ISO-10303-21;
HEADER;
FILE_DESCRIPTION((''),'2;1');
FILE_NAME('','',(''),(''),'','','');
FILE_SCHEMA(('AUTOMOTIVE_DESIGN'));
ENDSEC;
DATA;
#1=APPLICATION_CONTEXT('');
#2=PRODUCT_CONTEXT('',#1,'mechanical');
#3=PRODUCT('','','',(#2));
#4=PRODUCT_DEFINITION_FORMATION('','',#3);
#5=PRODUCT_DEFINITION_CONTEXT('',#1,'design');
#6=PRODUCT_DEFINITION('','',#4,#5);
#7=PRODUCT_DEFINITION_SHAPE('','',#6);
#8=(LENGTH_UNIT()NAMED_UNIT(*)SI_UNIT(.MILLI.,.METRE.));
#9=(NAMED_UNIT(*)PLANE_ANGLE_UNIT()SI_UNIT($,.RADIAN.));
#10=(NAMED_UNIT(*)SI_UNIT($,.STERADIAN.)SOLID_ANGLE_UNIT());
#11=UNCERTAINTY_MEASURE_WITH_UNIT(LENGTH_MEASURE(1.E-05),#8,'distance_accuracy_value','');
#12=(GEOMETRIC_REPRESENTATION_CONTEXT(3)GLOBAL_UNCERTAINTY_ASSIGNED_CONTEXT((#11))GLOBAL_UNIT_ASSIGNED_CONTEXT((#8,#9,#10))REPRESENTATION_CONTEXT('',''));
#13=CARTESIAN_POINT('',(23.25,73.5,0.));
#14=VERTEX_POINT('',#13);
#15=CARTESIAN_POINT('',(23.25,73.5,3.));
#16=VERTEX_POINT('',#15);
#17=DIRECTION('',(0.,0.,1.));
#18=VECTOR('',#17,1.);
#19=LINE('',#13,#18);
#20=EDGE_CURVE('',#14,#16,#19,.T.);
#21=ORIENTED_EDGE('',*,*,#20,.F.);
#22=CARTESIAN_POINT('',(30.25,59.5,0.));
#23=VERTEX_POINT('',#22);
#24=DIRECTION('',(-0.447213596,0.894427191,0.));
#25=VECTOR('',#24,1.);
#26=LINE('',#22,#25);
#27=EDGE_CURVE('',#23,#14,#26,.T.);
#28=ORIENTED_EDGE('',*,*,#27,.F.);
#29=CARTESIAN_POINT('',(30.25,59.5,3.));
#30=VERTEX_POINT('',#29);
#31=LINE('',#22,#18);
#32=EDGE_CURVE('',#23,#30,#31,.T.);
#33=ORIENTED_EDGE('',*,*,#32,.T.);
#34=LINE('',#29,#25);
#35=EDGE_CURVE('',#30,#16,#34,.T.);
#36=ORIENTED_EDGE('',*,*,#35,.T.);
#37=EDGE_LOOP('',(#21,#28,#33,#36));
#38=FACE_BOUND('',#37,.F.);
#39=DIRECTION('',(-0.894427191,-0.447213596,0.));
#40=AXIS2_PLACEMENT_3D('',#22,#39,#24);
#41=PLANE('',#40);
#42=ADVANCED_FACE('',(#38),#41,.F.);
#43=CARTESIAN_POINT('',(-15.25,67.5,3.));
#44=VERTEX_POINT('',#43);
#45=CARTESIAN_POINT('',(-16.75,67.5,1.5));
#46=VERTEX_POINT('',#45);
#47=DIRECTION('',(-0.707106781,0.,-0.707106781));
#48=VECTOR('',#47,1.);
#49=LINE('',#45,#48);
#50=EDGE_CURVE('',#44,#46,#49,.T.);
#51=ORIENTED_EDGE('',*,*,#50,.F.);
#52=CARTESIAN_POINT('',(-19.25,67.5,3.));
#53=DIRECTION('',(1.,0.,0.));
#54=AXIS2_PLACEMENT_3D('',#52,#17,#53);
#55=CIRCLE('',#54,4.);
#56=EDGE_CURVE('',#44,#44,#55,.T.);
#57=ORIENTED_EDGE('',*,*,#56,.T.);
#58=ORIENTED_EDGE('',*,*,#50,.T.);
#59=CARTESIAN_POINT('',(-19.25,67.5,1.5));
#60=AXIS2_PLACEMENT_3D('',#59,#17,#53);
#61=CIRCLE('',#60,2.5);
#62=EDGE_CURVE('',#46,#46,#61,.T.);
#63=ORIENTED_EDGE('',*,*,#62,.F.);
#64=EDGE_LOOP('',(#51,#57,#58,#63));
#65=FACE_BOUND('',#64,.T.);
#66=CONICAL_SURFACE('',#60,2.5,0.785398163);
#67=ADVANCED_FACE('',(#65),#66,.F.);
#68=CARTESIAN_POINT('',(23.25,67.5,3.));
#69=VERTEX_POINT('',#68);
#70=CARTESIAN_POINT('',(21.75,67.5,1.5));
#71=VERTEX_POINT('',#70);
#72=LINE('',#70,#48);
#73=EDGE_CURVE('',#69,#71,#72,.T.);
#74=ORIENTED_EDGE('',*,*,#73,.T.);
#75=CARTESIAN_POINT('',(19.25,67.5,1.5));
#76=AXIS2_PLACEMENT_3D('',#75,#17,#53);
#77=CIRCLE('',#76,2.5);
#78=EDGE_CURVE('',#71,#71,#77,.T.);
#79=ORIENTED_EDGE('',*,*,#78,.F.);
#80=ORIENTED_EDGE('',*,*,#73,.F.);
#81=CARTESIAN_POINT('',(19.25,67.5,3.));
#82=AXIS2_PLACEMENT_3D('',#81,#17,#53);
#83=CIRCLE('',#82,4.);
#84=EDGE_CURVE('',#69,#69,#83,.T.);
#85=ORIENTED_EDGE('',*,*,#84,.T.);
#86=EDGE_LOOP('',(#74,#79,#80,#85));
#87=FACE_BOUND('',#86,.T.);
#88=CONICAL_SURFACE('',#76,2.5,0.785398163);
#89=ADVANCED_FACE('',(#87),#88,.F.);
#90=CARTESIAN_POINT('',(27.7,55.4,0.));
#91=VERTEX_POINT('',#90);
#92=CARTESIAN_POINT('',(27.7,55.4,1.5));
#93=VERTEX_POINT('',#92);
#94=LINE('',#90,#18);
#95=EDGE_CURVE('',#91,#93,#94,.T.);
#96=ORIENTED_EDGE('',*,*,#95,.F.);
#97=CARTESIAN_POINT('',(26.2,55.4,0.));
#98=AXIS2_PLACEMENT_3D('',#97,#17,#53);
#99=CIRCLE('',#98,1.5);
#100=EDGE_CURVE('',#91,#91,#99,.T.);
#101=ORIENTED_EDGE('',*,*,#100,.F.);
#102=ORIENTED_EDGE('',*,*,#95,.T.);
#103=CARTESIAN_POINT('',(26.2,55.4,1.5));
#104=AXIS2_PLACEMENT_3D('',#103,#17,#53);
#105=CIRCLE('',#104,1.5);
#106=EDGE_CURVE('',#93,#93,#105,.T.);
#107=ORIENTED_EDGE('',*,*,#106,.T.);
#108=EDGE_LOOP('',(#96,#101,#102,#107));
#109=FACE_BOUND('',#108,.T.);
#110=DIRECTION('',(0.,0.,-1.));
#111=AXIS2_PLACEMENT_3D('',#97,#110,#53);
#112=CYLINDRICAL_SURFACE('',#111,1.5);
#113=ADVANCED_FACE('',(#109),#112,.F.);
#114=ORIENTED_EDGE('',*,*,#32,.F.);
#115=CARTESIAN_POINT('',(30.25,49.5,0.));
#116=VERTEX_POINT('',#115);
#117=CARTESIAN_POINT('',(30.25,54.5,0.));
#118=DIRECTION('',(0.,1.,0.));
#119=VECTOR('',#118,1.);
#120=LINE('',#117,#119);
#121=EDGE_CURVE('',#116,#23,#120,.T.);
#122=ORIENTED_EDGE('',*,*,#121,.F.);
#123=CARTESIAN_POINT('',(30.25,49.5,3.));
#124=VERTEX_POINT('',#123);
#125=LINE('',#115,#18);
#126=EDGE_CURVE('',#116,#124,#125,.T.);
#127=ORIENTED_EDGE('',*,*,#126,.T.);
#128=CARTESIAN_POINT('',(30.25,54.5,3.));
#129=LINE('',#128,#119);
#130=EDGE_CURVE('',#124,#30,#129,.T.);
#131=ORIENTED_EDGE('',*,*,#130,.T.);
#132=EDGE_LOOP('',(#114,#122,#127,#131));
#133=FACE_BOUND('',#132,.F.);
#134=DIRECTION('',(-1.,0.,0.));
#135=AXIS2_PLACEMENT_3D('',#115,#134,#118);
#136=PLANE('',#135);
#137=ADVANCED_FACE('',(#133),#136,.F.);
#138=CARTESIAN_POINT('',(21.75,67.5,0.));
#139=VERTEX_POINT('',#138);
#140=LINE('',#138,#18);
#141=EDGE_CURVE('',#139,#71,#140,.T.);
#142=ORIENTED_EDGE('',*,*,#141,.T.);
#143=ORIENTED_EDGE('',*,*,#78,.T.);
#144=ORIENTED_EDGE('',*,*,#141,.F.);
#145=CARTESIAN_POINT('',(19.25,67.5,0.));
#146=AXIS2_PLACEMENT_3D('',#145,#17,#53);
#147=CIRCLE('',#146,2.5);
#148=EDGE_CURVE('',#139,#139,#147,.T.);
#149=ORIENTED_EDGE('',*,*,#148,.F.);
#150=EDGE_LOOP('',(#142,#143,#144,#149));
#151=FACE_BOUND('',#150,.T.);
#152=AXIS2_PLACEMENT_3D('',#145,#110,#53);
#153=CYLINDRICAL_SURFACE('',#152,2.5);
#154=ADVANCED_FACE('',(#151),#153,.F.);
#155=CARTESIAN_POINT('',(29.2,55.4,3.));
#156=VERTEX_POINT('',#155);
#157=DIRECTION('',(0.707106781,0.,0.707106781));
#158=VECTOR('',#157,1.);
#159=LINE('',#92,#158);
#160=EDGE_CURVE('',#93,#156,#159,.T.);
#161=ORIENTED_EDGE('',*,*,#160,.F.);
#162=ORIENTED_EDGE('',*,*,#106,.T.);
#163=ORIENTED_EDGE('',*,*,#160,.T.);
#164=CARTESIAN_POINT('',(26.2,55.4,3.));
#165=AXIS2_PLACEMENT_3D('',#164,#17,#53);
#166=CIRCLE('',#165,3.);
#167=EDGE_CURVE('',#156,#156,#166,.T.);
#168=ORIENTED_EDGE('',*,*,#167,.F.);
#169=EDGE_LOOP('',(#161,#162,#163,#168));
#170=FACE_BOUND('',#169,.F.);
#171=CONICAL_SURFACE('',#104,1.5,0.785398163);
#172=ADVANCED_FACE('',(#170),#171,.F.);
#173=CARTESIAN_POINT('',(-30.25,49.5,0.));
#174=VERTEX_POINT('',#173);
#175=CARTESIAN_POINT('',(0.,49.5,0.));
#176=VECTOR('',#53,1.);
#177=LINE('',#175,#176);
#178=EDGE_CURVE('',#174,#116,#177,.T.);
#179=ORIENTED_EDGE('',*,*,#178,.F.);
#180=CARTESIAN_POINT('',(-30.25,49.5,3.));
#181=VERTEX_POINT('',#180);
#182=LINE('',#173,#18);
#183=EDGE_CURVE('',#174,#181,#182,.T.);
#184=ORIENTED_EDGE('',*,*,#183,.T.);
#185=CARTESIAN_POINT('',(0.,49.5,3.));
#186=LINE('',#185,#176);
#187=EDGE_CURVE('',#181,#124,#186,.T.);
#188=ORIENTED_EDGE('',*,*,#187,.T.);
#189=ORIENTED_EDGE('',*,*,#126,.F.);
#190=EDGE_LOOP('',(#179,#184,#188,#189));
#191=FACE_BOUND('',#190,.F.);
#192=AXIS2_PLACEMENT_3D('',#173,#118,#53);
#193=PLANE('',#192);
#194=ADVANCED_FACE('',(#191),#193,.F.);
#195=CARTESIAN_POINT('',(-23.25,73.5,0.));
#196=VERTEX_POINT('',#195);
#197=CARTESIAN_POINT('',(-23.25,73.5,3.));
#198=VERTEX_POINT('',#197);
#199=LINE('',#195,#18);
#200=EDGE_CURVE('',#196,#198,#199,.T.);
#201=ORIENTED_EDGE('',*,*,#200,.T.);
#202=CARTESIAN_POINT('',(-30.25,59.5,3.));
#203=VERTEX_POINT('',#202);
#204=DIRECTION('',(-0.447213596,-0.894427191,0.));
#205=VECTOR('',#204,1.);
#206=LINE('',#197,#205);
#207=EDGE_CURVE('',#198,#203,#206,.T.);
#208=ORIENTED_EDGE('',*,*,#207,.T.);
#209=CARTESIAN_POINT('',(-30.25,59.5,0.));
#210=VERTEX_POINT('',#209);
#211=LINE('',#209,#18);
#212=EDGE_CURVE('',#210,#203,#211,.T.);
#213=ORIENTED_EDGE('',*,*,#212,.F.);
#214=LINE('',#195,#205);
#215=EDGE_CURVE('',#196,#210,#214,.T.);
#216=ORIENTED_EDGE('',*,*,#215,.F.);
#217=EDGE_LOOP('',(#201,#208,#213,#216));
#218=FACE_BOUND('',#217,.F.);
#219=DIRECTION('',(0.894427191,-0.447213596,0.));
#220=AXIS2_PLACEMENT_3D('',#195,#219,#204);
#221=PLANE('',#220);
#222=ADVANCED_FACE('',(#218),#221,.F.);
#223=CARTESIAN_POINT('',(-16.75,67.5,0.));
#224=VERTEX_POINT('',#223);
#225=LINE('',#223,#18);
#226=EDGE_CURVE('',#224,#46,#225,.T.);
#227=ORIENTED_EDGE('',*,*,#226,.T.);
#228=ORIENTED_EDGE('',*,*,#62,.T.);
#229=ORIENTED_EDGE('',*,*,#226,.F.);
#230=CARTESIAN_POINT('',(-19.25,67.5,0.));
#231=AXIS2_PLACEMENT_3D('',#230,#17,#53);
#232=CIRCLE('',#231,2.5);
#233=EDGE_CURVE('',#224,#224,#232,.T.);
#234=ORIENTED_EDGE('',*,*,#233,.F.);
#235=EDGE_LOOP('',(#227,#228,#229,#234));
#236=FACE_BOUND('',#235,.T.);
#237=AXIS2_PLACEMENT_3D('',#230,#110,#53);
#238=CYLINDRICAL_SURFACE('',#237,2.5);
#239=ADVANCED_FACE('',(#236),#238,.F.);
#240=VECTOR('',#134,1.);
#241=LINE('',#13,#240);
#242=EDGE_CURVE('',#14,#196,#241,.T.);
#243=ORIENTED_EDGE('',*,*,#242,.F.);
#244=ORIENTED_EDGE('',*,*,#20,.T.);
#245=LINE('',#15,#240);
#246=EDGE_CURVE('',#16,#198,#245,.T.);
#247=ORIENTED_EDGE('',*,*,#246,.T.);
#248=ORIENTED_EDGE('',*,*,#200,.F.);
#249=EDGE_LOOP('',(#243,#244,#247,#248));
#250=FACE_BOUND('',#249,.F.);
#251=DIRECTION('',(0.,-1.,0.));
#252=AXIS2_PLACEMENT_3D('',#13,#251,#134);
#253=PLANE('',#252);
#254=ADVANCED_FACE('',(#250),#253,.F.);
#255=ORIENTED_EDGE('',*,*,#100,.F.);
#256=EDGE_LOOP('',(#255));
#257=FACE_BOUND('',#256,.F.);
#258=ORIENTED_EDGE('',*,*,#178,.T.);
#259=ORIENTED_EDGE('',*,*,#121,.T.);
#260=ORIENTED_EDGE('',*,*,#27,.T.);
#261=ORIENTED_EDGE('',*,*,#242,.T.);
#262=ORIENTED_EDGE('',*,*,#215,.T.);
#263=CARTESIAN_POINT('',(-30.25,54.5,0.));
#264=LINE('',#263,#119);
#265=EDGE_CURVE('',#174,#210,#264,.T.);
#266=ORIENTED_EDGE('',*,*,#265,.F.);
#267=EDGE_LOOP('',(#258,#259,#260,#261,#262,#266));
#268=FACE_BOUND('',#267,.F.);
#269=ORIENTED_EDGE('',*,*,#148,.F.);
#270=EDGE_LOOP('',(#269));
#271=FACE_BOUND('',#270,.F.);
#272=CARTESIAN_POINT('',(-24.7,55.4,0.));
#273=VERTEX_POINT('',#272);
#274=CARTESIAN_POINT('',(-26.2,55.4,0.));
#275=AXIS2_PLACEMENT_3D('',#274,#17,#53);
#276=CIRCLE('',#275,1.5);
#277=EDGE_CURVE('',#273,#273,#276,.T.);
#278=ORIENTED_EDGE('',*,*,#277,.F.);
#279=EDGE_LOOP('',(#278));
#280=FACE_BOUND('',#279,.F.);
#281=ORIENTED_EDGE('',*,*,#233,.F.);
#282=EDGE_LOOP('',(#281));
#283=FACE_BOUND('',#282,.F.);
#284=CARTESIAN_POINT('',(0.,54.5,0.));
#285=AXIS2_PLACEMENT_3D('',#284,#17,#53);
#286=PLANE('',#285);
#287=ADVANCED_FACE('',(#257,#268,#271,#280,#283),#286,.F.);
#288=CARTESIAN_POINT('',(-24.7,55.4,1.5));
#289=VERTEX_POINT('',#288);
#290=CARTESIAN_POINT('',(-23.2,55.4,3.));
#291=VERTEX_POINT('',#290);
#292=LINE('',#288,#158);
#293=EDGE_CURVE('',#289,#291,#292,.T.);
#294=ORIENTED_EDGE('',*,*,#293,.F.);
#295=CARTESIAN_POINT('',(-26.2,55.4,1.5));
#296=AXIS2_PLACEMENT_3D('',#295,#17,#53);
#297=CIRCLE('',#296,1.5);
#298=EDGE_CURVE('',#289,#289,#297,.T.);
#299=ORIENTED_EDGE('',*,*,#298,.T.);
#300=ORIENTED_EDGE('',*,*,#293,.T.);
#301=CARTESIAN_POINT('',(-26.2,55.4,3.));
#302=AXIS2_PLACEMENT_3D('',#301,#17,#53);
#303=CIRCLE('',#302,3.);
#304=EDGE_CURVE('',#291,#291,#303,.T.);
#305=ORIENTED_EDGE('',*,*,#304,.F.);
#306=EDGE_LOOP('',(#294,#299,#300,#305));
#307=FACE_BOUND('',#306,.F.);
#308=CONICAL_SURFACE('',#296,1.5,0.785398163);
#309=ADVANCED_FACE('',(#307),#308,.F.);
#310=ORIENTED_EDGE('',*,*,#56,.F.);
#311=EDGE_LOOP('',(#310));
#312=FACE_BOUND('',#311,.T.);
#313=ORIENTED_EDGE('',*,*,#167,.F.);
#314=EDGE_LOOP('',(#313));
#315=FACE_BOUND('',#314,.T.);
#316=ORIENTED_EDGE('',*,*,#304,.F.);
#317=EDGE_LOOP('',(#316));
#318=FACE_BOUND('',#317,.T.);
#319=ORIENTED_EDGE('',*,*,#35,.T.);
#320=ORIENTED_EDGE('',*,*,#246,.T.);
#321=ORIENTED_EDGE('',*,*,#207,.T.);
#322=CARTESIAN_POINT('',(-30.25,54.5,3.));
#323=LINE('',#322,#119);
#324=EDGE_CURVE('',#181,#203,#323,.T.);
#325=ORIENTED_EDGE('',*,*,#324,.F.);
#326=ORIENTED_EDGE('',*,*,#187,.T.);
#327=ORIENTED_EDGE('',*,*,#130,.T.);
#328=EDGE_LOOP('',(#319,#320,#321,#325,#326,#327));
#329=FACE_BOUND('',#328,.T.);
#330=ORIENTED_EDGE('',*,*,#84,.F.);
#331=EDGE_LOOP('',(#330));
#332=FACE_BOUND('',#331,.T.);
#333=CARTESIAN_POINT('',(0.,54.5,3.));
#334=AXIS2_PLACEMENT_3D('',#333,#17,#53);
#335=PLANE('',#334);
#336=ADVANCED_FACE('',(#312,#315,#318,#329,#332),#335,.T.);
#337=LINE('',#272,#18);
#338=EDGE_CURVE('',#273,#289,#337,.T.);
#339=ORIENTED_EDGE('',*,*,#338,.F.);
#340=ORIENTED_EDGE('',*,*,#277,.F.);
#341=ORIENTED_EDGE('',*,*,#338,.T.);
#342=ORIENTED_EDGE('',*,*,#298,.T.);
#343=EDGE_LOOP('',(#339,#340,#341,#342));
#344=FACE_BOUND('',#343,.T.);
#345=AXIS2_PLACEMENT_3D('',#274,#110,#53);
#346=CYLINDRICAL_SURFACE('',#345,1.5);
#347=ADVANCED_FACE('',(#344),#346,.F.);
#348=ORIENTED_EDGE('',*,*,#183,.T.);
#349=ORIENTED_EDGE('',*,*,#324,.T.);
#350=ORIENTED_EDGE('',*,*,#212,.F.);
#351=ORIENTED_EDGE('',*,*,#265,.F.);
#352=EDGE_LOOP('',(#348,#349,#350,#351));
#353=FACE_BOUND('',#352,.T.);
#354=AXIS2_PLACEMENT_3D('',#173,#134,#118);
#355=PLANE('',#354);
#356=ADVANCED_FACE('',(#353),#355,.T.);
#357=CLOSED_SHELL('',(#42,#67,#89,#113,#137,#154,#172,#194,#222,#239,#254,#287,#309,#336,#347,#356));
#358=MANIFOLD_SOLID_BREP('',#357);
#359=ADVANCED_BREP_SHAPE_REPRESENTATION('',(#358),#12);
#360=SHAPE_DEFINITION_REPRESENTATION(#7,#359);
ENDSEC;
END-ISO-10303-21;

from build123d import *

# Parameters (mm, degrees)
F0_W     = 60.5
F0_H     = 10
F0_R     = 1.5
F0_R_2   = 2.5
F1_DEPTH = 3
F2_SIZE  = 1.5
F3_SIZE  = 1.5


# Not quite as in the source:
# - a feature names something its author has since deleted; it is built from what else it names


with BuildPart() as f1:
    # F0 (on Top) → F1 (new body)
    with BuildSketch(Plane.XY):
        with Locations((0, 54.5)):
            Rectangle(F0_W, F0_H)
        with Locations((-26.2, 55.4)):
            Circle(F0_R, mode=Mode.SUBTRACT)
        with Locations((26.2, 55.4)):
            Circle(F0_R, mode=Mode.SUBTRACT)
        Polygon((-23.25, 73.5), (-30.25, 59.5), (30.25, 59.5), (23.25, 73.5), align=None)
        with Locations((-19.25, 67.5)):
            Circle(F0_R_2, mode=Mode.SUBTRACT)
        with Locations((19.25, 67.5)):
            Circle(F0_R_2, mode=Mode.SUBTRACT)
    extrude(amount=F1_DEPTH)

    # F2
    f2_edges = [f1.edges().sort_by_distance(p)[0] for p in [
        (-27.7, 55.4, 3),
        (24.7, 55.4, 3),
    ]]
    chamfer(f2_edges, length=F2_SIZE)

    # F3
    f3_edges = [f1.edges().sort_by_distance(p)[0] for p in [
        (16.75, 67.5, 3),
        (-21.75, 67.5, 3),
    ]]
    chamfer(f3_edges, length=F3_SIZE)


solid = f1.part
